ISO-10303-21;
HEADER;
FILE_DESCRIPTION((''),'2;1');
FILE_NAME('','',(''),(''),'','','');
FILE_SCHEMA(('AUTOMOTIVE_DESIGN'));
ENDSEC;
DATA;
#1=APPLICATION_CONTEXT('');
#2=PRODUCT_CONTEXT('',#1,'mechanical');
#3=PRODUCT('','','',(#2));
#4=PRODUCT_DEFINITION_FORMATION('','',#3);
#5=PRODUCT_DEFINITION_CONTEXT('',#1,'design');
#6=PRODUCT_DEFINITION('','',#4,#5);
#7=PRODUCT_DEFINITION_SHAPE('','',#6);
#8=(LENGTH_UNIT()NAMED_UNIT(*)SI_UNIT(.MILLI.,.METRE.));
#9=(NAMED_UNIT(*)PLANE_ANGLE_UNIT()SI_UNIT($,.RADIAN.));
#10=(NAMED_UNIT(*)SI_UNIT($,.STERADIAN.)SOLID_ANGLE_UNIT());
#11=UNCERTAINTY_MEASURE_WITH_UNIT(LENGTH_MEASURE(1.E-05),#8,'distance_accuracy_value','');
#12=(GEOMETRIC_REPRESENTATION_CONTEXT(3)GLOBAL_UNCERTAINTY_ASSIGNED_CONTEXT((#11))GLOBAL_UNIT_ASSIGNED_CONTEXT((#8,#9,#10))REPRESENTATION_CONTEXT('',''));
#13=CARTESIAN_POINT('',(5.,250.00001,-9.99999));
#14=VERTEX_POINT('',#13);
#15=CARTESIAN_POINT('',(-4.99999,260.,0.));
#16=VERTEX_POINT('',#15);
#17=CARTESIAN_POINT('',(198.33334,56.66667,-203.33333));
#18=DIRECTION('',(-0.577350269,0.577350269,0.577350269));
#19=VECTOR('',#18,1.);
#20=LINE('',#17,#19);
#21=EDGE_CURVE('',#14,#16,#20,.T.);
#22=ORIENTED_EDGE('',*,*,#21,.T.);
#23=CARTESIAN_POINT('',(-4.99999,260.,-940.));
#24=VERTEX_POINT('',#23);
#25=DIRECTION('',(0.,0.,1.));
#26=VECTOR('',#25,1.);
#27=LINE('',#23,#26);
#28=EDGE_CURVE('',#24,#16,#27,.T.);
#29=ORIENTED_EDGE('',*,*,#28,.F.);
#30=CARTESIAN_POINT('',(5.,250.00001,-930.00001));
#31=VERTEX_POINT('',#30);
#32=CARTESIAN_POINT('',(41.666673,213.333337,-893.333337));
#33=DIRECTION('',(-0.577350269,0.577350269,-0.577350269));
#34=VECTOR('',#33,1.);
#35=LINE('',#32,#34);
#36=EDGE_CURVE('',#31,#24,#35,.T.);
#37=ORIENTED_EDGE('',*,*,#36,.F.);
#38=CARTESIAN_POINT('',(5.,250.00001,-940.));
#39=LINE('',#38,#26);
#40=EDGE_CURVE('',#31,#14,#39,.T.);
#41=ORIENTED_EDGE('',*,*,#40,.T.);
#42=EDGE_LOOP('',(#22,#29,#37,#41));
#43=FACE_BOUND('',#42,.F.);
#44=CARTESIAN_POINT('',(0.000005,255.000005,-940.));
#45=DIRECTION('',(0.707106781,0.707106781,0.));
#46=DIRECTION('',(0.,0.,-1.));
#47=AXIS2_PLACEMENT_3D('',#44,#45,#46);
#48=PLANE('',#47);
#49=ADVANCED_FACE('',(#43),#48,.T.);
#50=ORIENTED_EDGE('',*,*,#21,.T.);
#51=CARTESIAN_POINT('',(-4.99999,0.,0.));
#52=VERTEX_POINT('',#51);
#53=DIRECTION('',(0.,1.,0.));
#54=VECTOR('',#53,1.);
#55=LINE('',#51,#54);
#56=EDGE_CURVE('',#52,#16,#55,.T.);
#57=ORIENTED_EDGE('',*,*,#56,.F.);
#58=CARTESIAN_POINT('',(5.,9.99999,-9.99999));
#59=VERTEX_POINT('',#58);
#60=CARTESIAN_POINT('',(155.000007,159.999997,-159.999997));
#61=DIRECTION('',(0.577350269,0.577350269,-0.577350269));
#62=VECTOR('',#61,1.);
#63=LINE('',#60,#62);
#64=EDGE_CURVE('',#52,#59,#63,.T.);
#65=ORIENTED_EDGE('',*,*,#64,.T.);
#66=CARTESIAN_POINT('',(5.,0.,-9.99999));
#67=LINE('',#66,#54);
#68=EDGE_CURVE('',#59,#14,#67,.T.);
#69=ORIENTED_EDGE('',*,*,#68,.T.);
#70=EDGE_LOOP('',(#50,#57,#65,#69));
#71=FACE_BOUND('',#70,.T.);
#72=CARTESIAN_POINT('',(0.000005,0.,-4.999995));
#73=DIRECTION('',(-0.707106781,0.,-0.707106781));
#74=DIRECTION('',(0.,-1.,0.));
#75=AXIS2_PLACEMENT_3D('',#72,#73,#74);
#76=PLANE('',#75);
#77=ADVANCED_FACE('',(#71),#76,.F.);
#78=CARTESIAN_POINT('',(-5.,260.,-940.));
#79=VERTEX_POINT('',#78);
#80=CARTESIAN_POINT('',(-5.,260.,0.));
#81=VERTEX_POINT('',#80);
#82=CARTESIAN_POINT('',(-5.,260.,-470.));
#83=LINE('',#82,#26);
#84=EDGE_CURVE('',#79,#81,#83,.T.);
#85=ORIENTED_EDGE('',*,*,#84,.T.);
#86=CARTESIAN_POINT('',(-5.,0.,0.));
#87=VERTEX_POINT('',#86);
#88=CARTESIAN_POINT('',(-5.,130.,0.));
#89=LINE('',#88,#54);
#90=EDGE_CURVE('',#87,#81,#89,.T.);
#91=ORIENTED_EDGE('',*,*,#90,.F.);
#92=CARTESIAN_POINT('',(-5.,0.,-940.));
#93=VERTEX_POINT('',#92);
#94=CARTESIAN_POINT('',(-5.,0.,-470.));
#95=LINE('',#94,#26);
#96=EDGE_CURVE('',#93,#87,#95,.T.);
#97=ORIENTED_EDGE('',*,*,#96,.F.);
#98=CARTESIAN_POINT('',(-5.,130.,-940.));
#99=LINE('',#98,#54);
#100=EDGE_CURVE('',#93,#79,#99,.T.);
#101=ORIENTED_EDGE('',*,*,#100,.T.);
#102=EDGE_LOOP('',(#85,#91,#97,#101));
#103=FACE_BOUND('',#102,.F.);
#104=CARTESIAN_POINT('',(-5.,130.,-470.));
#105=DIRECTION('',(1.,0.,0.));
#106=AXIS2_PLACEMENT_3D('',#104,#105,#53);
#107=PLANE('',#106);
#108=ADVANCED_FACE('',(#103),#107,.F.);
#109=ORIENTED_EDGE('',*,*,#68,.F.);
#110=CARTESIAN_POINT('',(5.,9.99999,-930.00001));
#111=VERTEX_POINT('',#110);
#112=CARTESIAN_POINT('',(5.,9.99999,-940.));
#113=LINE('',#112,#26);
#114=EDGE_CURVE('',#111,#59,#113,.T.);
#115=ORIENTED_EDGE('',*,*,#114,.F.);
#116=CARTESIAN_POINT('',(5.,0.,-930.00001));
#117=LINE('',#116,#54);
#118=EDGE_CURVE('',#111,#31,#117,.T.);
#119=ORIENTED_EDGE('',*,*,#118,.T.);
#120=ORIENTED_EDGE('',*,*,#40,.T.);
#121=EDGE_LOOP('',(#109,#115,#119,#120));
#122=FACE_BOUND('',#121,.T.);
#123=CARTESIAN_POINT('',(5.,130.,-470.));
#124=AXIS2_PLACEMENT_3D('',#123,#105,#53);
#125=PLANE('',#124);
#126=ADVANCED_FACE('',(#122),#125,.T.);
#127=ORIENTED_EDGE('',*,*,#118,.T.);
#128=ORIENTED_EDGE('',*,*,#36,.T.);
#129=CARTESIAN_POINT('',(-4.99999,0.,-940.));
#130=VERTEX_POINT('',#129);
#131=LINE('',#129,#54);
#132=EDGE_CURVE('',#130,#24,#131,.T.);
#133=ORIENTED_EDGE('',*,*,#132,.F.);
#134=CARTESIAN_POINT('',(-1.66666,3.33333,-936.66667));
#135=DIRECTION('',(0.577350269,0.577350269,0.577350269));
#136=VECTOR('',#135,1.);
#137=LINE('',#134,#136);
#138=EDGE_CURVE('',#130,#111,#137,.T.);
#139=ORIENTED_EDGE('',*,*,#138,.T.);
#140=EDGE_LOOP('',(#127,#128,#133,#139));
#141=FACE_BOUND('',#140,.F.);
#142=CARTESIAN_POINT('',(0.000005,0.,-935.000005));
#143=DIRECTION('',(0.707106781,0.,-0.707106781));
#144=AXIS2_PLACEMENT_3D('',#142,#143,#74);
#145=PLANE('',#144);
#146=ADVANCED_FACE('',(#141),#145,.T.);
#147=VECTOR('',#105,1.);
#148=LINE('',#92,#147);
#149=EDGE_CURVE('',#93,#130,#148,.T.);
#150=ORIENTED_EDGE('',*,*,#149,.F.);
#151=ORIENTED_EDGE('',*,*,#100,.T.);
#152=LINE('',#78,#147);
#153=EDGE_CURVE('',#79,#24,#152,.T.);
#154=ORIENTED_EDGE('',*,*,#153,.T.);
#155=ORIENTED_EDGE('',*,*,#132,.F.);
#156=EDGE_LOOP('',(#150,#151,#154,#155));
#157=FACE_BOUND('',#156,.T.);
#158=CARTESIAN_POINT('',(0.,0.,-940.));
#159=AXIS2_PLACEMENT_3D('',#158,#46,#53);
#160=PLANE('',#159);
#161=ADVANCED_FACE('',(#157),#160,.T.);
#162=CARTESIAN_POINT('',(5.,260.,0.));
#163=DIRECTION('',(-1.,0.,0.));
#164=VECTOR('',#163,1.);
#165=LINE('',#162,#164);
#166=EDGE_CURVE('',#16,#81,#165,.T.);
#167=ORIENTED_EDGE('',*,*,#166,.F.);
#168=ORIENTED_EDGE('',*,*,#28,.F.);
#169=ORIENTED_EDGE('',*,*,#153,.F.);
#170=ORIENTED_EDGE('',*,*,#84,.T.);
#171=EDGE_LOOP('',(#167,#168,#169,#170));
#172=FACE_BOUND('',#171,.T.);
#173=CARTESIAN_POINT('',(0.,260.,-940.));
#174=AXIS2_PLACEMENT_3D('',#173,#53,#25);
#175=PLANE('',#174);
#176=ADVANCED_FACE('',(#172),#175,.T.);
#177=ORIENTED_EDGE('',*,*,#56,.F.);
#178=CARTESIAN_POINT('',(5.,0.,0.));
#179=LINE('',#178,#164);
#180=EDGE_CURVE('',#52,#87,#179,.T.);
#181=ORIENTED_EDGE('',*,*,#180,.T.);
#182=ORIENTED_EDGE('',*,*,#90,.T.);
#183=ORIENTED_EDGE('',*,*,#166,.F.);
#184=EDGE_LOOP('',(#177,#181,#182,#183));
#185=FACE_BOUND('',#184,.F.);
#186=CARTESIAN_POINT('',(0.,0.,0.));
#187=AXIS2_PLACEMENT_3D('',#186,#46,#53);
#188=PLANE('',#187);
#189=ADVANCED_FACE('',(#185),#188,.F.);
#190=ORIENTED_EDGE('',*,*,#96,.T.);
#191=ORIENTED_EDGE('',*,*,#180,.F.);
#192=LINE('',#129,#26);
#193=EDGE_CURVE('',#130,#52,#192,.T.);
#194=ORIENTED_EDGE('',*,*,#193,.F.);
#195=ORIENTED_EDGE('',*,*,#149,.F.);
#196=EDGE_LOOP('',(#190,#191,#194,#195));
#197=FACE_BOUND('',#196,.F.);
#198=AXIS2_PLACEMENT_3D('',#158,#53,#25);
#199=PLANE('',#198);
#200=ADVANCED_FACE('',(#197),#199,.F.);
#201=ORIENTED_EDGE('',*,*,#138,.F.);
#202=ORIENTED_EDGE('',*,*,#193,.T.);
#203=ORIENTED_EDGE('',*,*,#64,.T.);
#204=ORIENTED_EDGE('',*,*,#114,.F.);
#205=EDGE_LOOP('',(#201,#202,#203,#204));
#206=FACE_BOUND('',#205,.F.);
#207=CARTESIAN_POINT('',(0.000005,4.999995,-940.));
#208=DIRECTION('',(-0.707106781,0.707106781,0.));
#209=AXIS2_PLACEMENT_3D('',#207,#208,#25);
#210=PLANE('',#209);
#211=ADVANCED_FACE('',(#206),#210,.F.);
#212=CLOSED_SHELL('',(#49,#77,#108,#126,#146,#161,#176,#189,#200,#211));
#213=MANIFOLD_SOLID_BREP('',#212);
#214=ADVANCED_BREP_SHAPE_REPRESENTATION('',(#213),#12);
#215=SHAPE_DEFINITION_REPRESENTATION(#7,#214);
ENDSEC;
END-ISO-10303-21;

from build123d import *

# Parameters (mm, degrees)
F0_W     = 260
F0_H     = 940
F1_DEPTH = 5
F2_SIZE  = 9.99999


# Not quite as in the source:
# - a fillet or chamfer is up to 0.001 mm smaller than in the source, because OpenCascade refuses the exact size


with BuildPart() as f1:
    # F0 (on Right) → F1 (new body, symmetric)
    with BuildSketch(Plane.YZ):
        with Locations((130, -470)):
            Rectangle(F0_W, F0_H)
    extrude(amount=F1_DEPTH, both=True)

    # F2 (size 10 in the source; OpenCascade refuses exactly that, so slightly less here)
    f2_edges = [f1.edges().sort_by_distance(p)[0] for p in [
        (5, 0, -470),
        (5, 130, 0),
        (5, 260, -470),
        (5, 130, -940),
    ]]
    chamfer(f2_edges, length=F2_SIZE)


solid = f1.part
